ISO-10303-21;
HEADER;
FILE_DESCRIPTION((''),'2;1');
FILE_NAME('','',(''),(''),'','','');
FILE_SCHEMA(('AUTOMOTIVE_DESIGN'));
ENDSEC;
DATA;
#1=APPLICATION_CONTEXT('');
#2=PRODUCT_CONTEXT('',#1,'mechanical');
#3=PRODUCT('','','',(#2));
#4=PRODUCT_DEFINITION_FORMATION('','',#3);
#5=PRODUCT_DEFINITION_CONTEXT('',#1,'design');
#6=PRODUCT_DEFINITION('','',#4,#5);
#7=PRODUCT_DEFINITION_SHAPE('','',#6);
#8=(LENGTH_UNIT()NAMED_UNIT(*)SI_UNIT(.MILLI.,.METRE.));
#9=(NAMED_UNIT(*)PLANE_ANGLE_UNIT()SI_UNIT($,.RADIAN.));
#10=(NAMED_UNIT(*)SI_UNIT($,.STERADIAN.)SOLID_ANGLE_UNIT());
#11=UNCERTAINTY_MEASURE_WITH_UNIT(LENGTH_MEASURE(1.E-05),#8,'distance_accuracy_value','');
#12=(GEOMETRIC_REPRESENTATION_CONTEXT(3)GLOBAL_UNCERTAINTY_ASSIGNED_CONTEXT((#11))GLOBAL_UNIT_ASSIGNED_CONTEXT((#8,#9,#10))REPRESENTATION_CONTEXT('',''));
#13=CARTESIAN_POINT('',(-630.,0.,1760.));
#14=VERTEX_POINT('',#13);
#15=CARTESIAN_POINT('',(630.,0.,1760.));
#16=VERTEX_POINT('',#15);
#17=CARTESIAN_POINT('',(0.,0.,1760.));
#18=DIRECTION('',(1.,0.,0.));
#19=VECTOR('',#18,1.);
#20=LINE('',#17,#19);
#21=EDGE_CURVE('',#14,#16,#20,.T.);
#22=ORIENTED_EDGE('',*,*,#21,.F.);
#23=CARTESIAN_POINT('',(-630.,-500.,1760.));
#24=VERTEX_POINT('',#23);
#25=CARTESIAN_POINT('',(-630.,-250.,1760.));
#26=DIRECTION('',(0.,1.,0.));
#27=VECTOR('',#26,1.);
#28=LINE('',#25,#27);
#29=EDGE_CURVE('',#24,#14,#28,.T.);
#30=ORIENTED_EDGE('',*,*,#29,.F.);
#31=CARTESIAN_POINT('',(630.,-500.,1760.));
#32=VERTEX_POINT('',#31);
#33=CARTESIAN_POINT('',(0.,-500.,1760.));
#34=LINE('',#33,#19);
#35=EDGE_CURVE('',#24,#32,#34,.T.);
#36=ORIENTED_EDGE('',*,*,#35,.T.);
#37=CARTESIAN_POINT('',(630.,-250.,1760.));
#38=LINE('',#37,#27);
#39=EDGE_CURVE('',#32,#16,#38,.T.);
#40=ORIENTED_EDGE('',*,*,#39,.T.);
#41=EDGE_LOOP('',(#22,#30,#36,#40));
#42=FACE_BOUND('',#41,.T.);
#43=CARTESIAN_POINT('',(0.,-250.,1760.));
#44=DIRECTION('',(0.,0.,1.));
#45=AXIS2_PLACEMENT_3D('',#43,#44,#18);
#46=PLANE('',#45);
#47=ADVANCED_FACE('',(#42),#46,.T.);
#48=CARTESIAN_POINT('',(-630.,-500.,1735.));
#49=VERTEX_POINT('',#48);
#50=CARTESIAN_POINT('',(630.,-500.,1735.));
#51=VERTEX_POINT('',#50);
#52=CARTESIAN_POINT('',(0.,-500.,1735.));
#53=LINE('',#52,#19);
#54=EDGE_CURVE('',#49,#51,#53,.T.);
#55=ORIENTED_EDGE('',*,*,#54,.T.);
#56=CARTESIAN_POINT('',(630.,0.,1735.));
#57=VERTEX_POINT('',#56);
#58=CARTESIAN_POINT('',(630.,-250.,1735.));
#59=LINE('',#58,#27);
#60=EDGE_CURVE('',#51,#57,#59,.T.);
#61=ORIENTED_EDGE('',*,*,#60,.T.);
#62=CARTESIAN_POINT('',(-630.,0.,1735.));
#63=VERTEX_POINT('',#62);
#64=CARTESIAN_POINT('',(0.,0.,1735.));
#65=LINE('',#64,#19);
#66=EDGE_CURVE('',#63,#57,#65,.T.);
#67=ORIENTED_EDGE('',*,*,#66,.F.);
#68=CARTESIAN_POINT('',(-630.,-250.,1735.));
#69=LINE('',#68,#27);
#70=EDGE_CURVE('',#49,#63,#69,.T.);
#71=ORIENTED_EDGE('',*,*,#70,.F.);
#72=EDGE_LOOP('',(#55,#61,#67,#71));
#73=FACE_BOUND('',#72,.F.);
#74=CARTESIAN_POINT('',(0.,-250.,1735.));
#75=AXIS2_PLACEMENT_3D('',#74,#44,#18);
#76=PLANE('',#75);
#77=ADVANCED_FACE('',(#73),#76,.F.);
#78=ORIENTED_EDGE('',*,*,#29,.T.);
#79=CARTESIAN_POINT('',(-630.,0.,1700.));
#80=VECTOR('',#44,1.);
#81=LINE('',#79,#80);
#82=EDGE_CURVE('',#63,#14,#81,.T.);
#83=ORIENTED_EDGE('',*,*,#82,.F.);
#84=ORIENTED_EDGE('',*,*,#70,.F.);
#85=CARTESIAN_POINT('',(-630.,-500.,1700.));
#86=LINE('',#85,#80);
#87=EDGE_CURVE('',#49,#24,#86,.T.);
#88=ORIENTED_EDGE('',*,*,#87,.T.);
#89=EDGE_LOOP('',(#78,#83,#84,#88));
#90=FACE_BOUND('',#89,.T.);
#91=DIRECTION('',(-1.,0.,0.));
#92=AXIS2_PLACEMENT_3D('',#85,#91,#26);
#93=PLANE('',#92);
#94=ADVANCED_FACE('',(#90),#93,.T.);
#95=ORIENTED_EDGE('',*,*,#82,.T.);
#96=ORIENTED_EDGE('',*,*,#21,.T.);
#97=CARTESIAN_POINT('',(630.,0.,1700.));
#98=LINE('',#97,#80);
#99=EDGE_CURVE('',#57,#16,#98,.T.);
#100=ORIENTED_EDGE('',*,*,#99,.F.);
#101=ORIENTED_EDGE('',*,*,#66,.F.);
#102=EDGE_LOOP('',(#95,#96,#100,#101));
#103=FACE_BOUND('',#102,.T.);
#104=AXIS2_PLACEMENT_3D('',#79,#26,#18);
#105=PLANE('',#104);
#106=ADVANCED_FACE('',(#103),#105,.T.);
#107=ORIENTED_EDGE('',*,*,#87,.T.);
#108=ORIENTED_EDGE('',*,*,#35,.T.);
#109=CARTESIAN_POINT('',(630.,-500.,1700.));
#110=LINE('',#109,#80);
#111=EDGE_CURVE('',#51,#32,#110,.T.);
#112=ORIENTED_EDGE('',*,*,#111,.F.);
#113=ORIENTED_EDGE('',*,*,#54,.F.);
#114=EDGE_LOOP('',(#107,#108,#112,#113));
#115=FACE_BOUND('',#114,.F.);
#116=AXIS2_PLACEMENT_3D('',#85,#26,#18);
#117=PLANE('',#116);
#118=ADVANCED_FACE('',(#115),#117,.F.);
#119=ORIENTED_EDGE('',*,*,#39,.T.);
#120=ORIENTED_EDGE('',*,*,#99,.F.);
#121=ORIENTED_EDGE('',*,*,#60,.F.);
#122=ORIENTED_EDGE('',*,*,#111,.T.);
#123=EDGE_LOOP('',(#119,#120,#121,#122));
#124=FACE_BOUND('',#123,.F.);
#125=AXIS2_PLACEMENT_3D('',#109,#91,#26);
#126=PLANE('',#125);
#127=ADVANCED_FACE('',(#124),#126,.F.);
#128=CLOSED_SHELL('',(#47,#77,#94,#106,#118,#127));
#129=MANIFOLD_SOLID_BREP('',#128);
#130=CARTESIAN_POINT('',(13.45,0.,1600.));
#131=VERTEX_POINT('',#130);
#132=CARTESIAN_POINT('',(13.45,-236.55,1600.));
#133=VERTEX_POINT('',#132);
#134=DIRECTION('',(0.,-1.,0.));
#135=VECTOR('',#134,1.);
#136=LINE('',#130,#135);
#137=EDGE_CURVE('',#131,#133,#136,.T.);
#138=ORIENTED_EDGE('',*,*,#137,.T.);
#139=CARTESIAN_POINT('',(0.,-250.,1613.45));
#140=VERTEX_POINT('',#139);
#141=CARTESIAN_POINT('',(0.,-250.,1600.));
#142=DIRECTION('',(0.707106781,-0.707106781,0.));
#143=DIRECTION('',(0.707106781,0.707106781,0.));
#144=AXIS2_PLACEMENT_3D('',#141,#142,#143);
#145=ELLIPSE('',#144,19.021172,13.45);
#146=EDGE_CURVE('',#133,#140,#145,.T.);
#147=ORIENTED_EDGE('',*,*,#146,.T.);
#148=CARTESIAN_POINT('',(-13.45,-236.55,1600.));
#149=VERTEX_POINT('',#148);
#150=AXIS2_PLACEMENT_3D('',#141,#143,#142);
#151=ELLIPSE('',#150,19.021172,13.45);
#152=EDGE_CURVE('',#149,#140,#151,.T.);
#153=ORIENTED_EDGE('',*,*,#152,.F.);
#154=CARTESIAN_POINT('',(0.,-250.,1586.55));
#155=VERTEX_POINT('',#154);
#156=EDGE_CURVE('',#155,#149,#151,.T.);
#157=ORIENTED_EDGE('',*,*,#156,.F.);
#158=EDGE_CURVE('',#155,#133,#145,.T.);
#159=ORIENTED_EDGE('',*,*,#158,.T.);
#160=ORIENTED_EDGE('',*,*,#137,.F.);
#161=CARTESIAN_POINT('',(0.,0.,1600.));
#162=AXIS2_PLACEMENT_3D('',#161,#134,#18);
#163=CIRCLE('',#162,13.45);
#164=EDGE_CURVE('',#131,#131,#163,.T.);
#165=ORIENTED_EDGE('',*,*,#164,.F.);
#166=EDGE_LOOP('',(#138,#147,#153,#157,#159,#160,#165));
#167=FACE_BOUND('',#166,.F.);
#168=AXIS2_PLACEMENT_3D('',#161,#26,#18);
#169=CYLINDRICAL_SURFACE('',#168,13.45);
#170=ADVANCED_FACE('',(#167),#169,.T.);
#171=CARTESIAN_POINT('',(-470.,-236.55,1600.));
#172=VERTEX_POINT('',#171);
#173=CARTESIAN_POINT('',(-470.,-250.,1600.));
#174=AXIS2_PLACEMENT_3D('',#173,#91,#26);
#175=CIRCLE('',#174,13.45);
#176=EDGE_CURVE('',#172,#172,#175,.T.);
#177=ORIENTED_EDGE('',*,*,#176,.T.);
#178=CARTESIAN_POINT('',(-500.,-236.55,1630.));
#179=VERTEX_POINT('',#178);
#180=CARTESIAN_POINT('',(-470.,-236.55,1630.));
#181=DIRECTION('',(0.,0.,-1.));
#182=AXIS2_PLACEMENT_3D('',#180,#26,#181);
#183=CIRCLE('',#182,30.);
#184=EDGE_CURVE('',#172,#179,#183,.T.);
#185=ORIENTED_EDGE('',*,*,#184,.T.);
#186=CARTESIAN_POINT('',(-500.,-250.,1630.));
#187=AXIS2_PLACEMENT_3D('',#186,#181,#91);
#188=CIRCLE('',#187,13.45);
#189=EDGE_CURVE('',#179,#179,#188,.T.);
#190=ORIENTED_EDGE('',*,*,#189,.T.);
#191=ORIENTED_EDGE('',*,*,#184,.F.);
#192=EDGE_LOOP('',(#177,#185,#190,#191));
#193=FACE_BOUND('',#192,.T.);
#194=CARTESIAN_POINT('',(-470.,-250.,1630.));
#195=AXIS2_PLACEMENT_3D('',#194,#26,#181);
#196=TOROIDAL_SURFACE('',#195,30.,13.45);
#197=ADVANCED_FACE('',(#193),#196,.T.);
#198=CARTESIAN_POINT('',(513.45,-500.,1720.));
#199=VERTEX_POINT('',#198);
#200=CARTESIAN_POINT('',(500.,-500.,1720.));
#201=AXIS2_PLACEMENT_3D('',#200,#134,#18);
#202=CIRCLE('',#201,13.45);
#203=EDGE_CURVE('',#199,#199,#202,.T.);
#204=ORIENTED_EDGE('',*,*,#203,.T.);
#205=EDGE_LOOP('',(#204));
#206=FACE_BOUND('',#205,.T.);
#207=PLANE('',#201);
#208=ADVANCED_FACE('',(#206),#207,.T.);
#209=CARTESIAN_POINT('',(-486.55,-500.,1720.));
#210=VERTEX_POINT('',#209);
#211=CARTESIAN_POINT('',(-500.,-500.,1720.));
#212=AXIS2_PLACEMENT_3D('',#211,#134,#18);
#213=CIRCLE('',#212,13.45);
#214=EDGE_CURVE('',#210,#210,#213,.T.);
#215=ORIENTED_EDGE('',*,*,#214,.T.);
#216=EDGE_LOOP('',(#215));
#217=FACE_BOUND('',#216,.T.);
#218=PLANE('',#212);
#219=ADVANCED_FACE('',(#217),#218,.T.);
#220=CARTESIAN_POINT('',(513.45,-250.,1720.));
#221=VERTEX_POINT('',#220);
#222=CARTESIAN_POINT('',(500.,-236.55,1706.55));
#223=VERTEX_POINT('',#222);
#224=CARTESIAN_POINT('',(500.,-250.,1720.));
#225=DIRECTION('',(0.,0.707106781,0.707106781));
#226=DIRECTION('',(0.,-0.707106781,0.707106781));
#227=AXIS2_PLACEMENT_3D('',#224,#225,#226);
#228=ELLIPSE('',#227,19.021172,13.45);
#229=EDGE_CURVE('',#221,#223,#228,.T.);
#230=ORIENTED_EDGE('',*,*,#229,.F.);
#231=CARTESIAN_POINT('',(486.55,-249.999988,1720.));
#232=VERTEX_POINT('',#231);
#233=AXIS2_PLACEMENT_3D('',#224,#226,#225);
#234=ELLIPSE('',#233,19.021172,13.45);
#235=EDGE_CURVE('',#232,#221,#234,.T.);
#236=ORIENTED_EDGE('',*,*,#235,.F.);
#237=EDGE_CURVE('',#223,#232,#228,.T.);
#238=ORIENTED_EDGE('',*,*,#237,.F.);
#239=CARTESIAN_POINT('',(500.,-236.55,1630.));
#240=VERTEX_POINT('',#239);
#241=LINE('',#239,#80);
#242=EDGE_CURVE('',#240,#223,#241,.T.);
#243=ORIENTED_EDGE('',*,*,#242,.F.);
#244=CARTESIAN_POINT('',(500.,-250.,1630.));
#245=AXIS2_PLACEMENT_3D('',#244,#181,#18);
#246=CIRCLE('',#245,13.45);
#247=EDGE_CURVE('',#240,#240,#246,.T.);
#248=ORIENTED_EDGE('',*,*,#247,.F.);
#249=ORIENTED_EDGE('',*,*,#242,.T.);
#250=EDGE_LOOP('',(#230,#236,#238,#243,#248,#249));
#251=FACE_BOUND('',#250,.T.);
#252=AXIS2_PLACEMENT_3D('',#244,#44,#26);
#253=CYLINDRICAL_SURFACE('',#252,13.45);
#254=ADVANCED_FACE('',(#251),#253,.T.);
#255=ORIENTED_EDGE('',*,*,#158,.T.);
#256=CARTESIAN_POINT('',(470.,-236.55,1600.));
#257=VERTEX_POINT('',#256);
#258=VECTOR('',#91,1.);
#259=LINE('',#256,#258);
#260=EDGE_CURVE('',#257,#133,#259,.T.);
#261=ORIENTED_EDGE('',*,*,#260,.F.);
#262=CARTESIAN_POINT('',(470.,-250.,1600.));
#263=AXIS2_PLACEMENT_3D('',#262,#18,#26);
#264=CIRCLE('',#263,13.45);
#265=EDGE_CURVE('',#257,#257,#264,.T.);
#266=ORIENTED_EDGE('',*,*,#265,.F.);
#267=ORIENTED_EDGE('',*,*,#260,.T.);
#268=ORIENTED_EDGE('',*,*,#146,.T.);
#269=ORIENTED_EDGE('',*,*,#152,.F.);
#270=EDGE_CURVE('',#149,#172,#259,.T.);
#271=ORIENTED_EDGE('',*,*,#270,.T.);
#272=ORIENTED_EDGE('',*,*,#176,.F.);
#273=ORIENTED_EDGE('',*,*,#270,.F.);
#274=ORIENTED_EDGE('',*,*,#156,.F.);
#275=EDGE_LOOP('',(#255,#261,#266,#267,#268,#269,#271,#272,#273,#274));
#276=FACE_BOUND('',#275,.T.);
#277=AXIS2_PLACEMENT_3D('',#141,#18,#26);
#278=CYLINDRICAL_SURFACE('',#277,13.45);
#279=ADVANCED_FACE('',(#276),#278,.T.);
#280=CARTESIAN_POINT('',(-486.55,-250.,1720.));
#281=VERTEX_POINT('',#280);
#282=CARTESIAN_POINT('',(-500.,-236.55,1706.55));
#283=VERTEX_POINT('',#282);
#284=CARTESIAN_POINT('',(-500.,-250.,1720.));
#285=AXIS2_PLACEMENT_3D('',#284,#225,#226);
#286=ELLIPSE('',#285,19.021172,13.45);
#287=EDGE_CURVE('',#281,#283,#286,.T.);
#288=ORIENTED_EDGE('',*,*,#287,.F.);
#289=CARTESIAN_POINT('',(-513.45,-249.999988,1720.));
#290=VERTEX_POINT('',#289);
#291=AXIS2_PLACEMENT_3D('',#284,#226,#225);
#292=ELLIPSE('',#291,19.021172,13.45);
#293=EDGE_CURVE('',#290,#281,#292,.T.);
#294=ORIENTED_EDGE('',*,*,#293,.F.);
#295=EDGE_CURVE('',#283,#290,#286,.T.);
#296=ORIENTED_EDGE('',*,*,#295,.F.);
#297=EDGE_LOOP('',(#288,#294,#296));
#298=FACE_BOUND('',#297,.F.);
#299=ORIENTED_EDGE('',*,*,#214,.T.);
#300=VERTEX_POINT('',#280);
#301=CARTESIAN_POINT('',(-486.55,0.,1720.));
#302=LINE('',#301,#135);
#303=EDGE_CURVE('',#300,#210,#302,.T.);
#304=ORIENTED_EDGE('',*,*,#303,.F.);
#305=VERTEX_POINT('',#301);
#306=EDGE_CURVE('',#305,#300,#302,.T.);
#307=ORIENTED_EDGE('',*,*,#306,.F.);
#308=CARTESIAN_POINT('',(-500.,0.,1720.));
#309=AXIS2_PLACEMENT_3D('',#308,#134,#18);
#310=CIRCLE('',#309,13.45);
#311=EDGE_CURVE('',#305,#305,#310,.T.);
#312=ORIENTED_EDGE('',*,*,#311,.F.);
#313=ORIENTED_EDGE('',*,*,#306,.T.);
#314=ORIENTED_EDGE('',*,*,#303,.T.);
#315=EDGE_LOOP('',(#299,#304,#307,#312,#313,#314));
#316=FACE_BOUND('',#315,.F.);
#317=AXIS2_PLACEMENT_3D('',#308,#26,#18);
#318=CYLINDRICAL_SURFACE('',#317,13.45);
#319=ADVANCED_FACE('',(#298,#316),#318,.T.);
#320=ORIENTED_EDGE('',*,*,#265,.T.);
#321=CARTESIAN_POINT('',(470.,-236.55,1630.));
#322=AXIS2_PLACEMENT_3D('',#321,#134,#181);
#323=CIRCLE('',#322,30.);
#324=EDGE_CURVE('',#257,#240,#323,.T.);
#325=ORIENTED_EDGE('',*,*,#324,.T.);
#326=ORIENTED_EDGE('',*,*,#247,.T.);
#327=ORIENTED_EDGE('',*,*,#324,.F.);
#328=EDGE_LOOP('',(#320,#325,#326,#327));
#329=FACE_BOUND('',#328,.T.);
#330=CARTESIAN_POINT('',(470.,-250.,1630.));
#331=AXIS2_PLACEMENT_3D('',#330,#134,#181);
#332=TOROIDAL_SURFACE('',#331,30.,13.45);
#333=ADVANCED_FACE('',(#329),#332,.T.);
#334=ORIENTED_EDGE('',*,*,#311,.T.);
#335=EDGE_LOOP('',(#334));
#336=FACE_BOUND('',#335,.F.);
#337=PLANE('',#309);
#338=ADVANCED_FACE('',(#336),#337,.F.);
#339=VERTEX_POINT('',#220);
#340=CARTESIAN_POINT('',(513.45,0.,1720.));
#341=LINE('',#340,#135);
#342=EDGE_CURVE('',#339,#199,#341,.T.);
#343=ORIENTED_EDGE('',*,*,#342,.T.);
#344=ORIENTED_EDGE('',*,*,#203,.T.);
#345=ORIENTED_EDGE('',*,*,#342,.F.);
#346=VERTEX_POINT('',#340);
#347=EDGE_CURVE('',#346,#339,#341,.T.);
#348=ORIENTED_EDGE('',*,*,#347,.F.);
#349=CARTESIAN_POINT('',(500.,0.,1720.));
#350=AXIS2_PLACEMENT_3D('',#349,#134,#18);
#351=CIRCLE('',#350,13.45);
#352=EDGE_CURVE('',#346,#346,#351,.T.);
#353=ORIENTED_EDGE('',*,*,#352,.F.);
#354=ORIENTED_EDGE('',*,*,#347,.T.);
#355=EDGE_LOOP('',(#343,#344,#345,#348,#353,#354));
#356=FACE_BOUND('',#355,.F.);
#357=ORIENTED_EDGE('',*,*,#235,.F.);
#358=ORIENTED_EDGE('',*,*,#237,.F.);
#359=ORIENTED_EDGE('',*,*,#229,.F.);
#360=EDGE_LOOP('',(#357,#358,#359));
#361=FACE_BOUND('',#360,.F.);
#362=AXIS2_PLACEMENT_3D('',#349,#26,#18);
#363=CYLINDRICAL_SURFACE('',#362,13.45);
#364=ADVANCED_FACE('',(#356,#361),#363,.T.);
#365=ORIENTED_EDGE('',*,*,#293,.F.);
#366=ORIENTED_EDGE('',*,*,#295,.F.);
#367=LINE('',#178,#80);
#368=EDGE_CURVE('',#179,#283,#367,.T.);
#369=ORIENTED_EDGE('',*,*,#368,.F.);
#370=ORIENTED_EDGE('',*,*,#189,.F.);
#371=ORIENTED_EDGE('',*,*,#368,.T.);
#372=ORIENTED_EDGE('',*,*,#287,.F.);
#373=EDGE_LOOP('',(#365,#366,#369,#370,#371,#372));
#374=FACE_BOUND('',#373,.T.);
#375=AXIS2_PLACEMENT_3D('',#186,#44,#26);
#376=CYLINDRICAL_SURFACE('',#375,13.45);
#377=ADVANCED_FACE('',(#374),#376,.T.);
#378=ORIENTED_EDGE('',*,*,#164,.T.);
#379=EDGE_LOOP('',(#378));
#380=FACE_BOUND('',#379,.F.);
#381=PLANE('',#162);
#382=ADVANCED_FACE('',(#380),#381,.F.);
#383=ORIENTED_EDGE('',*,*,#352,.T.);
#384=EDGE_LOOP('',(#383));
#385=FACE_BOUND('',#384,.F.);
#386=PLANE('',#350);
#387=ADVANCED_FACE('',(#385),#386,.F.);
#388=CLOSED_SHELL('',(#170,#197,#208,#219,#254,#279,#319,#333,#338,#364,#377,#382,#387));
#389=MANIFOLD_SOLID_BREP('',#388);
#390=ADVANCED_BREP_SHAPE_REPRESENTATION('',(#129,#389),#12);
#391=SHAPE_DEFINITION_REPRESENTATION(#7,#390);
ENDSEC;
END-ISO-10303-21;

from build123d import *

# Parameters (mm, degrees)
F7_R      = 13.45
F10_R     = 13.45
F12_DEPTH = 500
F13_W     = 1260
F13_H     = 500
F14_DEPTH = 60
F15_DEPTH = 35


with BuildPart() as f8:
    # F8: sweep along a path in F4
    with BuildLine(Plane.XZ.offset(250)) as f8_path:
        Line((0, 1600), (-470, 1600))
        ThreePointArc((-470, 1600), (-491.2132034356, 1608.7867965644), (-500, 1630))
        Line((-500, 1630), (-500, 1720))
    # F7 (on Right) → F8 (sweep)
    with BuildSketch(Plane.YZ):
        with Locations((-250, 1600)):
            Circle(F7_R)
    sweep(path=f8_path.line)

    # F9: sweep along a path in F4
    with BuildLine(Plane.XZ.offset(250)) as f9_path:
        Line((0, 1600), (470, 1600))
        ThreePointArc((470, 1600), (491.2132034356, 1608.7867965644), (500, 1630))
        Line((500, 1630), (500, 1720))
    # F7 (on Right) → F9 (sweep)
    with BuildSketch(Plane.YZ):
        with Locations((-250, 1600)):
            Circle(F7_R)
    sweep(path=f9_path.line)

    # F10 (on face) → F11 (join, up to the next surface of F8)
    with BuildSketch(Plane.XZ):
        with Locations((0, 1600)):
            Circle(F10_R)
    extrude(until=Until.NEXT)

    # F10 (on face) → F12 (join)
    with BuildSketch(Plane.XZ):
        with Locations((-500, 1720)):
            Circle(F10_R)
        with Locations((500, 1720)):
            Circle(F10_R)
    extrude(amount=F12_DEPTH)


with BuildPart() as f14:
    # F13 (on offset) → F14 (new body)
    with BuildSketch(Plane.XY.offset(1700)):
        with Locations((0, -250)):
            Rectangle(F13_W, F13_H)
    extrude(amount=F14_DEPTH)

    # F13 (on offset) → F15 (cut)
    with BuildSketch(Plane.XY.offset(1700)):
        with Locations((0, -250)):
            Rectangle(F13_W, F13_H)
    extrude(amount=F15_DEPTH, mode=Mode.SUBTRACT)


solid = Compound([f8.part, f14.part])
